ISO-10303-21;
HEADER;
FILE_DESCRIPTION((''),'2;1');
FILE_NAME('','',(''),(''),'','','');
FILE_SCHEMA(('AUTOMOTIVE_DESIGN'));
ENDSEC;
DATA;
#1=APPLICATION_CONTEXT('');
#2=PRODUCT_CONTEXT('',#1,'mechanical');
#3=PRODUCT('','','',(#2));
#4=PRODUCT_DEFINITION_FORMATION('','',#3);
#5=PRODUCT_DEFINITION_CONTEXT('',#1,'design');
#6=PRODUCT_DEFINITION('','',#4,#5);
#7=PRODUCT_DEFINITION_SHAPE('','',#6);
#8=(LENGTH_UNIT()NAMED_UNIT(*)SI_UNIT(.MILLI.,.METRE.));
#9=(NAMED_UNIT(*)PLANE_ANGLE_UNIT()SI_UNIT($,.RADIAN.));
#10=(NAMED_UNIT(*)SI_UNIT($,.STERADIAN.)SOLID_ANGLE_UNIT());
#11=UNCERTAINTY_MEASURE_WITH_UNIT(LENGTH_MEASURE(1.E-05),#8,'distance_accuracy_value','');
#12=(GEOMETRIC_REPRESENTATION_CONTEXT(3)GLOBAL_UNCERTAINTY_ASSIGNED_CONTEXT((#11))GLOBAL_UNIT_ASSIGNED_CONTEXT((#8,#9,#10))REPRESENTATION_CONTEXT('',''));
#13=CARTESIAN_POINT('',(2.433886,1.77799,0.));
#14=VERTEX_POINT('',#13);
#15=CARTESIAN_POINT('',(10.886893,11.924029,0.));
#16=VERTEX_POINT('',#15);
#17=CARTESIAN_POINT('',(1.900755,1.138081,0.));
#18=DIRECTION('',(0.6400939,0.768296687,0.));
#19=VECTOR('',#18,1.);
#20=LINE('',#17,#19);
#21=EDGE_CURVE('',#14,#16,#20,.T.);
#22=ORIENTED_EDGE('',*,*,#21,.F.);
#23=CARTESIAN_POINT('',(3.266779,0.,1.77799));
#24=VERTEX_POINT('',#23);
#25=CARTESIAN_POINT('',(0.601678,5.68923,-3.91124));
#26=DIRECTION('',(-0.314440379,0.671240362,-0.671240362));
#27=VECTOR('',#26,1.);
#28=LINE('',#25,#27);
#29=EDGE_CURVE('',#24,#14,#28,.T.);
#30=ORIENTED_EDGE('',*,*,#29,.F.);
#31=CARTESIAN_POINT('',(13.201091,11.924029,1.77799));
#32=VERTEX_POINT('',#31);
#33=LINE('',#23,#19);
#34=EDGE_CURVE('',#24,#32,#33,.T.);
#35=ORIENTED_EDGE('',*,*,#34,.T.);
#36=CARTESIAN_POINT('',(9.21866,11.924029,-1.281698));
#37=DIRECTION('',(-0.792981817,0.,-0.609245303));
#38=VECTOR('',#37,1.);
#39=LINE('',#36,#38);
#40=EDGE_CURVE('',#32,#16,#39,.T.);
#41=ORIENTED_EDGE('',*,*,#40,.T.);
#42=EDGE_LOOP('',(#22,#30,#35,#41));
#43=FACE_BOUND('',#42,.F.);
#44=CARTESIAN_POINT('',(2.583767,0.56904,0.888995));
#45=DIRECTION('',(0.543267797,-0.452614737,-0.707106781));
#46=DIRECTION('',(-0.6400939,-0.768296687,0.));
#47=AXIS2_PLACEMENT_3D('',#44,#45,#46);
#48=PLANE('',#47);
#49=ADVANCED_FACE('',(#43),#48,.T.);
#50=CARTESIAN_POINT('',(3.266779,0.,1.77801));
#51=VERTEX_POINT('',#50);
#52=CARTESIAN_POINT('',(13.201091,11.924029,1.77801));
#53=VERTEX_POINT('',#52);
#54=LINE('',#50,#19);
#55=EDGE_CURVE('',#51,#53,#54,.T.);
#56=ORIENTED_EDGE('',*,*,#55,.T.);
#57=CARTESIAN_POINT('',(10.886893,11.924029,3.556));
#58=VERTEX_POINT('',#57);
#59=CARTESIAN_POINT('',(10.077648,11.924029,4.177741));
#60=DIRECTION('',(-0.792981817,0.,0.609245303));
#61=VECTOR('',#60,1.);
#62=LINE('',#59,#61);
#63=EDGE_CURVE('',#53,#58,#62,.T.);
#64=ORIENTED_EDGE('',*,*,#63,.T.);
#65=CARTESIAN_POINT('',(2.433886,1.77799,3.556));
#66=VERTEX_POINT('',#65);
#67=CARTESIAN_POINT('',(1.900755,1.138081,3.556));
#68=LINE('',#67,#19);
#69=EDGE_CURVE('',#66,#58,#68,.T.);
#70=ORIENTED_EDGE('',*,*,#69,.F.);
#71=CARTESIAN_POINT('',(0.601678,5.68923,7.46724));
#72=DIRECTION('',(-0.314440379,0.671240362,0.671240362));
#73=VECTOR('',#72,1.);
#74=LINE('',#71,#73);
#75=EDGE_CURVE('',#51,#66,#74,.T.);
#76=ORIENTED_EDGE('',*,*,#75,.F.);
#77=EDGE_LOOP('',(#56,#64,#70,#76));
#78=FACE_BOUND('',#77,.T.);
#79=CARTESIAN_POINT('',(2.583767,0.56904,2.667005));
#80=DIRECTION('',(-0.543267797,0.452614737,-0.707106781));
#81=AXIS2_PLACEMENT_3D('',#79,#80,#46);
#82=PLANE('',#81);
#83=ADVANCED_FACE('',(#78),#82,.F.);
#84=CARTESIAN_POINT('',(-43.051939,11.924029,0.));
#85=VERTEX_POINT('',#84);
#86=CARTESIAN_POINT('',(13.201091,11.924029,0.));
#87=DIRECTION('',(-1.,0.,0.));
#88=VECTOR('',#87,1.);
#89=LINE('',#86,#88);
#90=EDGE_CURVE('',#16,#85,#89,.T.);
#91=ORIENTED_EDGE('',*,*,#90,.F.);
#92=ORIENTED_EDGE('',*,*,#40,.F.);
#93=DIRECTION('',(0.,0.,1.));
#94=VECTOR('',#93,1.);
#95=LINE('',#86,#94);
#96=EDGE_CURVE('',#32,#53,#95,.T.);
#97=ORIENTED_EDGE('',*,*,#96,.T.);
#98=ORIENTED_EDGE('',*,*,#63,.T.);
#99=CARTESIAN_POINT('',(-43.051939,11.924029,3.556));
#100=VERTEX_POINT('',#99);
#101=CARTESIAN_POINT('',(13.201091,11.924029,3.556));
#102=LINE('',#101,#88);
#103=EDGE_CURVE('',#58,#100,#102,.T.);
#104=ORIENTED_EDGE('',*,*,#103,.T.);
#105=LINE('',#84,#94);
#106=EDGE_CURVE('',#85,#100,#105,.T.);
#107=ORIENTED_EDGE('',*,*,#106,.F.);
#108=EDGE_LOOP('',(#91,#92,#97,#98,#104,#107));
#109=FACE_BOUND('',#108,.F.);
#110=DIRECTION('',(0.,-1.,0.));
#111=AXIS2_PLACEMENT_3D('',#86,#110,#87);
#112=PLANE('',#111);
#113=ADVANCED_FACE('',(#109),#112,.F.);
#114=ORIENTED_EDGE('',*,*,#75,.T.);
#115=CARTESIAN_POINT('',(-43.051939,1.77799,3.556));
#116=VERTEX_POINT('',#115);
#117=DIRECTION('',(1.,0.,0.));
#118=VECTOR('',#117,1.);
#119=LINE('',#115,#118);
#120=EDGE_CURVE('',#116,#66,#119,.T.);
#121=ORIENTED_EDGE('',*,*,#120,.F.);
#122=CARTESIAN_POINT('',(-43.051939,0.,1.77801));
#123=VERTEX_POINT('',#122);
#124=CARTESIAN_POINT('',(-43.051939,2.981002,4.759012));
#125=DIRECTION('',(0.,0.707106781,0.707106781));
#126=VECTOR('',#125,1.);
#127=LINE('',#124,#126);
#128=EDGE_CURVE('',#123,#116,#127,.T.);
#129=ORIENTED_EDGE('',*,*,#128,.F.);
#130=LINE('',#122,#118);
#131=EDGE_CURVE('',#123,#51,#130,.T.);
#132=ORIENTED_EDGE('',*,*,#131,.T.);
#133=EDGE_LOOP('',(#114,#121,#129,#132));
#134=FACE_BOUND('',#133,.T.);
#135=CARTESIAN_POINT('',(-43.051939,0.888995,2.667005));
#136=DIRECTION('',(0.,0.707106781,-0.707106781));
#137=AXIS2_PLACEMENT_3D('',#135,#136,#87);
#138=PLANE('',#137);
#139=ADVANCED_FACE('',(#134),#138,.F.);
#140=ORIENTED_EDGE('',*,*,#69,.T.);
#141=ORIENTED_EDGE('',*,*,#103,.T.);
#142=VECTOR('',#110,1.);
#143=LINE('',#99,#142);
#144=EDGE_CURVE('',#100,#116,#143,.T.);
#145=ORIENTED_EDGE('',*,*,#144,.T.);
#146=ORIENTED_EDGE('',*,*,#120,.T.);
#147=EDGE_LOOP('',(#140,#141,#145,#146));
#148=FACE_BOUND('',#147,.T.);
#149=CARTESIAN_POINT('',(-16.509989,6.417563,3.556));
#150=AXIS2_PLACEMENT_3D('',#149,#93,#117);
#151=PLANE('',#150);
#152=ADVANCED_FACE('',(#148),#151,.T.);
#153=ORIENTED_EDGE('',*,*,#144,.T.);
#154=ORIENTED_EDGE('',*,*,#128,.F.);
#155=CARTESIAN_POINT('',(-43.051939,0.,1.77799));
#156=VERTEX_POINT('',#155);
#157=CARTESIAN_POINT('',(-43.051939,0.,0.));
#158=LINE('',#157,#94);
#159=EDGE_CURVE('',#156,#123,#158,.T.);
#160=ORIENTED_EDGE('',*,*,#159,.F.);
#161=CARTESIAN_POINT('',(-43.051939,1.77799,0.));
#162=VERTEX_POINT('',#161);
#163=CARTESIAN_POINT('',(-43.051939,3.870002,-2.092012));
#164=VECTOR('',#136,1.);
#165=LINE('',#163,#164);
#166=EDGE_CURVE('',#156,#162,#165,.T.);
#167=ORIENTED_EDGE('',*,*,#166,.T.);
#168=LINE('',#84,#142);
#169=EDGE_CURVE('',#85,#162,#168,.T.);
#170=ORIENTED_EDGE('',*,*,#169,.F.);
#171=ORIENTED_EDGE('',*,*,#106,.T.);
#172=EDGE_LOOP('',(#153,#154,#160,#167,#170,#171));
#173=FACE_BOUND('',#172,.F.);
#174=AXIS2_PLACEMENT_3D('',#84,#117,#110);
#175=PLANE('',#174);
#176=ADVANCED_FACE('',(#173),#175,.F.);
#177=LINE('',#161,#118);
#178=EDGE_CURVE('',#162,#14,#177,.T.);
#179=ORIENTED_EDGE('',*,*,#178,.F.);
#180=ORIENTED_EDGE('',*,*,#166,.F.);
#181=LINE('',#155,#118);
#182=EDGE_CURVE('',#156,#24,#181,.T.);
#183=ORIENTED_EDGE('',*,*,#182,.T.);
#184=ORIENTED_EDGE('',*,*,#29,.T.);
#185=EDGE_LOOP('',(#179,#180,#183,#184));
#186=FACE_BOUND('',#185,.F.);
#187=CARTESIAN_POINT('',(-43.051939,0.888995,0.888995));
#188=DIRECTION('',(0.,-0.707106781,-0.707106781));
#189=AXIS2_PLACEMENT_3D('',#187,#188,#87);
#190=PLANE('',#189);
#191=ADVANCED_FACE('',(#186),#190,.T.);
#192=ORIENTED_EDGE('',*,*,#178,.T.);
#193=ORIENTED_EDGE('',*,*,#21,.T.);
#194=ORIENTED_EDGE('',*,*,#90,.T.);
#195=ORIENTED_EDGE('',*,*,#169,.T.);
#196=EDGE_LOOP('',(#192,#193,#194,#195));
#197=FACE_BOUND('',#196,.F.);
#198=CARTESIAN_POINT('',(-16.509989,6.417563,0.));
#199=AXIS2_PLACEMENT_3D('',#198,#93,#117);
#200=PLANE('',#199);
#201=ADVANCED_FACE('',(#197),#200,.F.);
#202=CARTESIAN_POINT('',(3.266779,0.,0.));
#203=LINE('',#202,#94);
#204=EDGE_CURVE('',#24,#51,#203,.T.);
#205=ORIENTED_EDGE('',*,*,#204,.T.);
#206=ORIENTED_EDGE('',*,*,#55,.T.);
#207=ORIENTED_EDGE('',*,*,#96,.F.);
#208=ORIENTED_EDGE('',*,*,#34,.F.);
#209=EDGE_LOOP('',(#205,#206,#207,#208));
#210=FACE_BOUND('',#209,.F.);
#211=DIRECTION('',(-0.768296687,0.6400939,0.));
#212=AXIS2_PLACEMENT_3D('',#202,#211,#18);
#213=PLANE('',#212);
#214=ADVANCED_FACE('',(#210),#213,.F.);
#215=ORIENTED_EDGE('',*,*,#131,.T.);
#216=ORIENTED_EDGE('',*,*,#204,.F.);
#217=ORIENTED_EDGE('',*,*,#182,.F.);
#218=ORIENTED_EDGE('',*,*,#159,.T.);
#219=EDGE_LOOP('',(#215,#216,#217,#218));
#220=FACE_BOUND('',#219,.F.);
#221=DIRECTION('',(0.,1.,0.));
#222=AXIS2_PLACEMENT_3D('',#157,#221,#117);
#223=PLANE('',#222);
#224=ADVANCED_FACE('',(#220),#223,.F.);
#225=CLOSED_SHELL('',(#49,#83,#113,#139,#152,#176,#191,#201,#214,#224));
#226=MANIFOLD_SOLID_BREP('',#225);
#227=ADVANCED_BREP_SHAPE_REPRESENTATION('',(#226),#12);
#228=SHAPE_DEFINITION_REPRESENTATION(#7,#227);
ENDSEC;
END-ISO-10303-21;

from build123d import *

# Parameters (mm, degrees)
F1_DEPTH = 3.556
F2_SIZE  = 1.77799


# Not quite as in the source:
# - a fillet or chamfer is up to 0.001 mm smaller than in the source, because OpenCascade refuses the exact size


with BuildPart() as f1:
    # F0 (on Top) → F1 (new body)
    with BuildSketch(Plane.XY):
        Polygon((-43.0519394577, 11.9240293279), (-43.0519394577, 0), (3.2667792402, 0), (13.2010905072, 11.9240293279), align=None)
    extrude(amount=F1_DEPTH)

    # F2 (size 1.778 in the source; OpenCascade refuses exactly that, so slightly less here)
    f2_edges = [f1.edges().sort_by_distance(p)[0] for p in [
        (8.233935, 5.962015, 0),
        (8.233935, 5.962015, 3.556),
        (-19.89258, 0, 0),
        (-19.89258, 0, 3.556),
    ]]
    chamfer(f2_edges, length=F2_SIZE)


solid = f1.part
